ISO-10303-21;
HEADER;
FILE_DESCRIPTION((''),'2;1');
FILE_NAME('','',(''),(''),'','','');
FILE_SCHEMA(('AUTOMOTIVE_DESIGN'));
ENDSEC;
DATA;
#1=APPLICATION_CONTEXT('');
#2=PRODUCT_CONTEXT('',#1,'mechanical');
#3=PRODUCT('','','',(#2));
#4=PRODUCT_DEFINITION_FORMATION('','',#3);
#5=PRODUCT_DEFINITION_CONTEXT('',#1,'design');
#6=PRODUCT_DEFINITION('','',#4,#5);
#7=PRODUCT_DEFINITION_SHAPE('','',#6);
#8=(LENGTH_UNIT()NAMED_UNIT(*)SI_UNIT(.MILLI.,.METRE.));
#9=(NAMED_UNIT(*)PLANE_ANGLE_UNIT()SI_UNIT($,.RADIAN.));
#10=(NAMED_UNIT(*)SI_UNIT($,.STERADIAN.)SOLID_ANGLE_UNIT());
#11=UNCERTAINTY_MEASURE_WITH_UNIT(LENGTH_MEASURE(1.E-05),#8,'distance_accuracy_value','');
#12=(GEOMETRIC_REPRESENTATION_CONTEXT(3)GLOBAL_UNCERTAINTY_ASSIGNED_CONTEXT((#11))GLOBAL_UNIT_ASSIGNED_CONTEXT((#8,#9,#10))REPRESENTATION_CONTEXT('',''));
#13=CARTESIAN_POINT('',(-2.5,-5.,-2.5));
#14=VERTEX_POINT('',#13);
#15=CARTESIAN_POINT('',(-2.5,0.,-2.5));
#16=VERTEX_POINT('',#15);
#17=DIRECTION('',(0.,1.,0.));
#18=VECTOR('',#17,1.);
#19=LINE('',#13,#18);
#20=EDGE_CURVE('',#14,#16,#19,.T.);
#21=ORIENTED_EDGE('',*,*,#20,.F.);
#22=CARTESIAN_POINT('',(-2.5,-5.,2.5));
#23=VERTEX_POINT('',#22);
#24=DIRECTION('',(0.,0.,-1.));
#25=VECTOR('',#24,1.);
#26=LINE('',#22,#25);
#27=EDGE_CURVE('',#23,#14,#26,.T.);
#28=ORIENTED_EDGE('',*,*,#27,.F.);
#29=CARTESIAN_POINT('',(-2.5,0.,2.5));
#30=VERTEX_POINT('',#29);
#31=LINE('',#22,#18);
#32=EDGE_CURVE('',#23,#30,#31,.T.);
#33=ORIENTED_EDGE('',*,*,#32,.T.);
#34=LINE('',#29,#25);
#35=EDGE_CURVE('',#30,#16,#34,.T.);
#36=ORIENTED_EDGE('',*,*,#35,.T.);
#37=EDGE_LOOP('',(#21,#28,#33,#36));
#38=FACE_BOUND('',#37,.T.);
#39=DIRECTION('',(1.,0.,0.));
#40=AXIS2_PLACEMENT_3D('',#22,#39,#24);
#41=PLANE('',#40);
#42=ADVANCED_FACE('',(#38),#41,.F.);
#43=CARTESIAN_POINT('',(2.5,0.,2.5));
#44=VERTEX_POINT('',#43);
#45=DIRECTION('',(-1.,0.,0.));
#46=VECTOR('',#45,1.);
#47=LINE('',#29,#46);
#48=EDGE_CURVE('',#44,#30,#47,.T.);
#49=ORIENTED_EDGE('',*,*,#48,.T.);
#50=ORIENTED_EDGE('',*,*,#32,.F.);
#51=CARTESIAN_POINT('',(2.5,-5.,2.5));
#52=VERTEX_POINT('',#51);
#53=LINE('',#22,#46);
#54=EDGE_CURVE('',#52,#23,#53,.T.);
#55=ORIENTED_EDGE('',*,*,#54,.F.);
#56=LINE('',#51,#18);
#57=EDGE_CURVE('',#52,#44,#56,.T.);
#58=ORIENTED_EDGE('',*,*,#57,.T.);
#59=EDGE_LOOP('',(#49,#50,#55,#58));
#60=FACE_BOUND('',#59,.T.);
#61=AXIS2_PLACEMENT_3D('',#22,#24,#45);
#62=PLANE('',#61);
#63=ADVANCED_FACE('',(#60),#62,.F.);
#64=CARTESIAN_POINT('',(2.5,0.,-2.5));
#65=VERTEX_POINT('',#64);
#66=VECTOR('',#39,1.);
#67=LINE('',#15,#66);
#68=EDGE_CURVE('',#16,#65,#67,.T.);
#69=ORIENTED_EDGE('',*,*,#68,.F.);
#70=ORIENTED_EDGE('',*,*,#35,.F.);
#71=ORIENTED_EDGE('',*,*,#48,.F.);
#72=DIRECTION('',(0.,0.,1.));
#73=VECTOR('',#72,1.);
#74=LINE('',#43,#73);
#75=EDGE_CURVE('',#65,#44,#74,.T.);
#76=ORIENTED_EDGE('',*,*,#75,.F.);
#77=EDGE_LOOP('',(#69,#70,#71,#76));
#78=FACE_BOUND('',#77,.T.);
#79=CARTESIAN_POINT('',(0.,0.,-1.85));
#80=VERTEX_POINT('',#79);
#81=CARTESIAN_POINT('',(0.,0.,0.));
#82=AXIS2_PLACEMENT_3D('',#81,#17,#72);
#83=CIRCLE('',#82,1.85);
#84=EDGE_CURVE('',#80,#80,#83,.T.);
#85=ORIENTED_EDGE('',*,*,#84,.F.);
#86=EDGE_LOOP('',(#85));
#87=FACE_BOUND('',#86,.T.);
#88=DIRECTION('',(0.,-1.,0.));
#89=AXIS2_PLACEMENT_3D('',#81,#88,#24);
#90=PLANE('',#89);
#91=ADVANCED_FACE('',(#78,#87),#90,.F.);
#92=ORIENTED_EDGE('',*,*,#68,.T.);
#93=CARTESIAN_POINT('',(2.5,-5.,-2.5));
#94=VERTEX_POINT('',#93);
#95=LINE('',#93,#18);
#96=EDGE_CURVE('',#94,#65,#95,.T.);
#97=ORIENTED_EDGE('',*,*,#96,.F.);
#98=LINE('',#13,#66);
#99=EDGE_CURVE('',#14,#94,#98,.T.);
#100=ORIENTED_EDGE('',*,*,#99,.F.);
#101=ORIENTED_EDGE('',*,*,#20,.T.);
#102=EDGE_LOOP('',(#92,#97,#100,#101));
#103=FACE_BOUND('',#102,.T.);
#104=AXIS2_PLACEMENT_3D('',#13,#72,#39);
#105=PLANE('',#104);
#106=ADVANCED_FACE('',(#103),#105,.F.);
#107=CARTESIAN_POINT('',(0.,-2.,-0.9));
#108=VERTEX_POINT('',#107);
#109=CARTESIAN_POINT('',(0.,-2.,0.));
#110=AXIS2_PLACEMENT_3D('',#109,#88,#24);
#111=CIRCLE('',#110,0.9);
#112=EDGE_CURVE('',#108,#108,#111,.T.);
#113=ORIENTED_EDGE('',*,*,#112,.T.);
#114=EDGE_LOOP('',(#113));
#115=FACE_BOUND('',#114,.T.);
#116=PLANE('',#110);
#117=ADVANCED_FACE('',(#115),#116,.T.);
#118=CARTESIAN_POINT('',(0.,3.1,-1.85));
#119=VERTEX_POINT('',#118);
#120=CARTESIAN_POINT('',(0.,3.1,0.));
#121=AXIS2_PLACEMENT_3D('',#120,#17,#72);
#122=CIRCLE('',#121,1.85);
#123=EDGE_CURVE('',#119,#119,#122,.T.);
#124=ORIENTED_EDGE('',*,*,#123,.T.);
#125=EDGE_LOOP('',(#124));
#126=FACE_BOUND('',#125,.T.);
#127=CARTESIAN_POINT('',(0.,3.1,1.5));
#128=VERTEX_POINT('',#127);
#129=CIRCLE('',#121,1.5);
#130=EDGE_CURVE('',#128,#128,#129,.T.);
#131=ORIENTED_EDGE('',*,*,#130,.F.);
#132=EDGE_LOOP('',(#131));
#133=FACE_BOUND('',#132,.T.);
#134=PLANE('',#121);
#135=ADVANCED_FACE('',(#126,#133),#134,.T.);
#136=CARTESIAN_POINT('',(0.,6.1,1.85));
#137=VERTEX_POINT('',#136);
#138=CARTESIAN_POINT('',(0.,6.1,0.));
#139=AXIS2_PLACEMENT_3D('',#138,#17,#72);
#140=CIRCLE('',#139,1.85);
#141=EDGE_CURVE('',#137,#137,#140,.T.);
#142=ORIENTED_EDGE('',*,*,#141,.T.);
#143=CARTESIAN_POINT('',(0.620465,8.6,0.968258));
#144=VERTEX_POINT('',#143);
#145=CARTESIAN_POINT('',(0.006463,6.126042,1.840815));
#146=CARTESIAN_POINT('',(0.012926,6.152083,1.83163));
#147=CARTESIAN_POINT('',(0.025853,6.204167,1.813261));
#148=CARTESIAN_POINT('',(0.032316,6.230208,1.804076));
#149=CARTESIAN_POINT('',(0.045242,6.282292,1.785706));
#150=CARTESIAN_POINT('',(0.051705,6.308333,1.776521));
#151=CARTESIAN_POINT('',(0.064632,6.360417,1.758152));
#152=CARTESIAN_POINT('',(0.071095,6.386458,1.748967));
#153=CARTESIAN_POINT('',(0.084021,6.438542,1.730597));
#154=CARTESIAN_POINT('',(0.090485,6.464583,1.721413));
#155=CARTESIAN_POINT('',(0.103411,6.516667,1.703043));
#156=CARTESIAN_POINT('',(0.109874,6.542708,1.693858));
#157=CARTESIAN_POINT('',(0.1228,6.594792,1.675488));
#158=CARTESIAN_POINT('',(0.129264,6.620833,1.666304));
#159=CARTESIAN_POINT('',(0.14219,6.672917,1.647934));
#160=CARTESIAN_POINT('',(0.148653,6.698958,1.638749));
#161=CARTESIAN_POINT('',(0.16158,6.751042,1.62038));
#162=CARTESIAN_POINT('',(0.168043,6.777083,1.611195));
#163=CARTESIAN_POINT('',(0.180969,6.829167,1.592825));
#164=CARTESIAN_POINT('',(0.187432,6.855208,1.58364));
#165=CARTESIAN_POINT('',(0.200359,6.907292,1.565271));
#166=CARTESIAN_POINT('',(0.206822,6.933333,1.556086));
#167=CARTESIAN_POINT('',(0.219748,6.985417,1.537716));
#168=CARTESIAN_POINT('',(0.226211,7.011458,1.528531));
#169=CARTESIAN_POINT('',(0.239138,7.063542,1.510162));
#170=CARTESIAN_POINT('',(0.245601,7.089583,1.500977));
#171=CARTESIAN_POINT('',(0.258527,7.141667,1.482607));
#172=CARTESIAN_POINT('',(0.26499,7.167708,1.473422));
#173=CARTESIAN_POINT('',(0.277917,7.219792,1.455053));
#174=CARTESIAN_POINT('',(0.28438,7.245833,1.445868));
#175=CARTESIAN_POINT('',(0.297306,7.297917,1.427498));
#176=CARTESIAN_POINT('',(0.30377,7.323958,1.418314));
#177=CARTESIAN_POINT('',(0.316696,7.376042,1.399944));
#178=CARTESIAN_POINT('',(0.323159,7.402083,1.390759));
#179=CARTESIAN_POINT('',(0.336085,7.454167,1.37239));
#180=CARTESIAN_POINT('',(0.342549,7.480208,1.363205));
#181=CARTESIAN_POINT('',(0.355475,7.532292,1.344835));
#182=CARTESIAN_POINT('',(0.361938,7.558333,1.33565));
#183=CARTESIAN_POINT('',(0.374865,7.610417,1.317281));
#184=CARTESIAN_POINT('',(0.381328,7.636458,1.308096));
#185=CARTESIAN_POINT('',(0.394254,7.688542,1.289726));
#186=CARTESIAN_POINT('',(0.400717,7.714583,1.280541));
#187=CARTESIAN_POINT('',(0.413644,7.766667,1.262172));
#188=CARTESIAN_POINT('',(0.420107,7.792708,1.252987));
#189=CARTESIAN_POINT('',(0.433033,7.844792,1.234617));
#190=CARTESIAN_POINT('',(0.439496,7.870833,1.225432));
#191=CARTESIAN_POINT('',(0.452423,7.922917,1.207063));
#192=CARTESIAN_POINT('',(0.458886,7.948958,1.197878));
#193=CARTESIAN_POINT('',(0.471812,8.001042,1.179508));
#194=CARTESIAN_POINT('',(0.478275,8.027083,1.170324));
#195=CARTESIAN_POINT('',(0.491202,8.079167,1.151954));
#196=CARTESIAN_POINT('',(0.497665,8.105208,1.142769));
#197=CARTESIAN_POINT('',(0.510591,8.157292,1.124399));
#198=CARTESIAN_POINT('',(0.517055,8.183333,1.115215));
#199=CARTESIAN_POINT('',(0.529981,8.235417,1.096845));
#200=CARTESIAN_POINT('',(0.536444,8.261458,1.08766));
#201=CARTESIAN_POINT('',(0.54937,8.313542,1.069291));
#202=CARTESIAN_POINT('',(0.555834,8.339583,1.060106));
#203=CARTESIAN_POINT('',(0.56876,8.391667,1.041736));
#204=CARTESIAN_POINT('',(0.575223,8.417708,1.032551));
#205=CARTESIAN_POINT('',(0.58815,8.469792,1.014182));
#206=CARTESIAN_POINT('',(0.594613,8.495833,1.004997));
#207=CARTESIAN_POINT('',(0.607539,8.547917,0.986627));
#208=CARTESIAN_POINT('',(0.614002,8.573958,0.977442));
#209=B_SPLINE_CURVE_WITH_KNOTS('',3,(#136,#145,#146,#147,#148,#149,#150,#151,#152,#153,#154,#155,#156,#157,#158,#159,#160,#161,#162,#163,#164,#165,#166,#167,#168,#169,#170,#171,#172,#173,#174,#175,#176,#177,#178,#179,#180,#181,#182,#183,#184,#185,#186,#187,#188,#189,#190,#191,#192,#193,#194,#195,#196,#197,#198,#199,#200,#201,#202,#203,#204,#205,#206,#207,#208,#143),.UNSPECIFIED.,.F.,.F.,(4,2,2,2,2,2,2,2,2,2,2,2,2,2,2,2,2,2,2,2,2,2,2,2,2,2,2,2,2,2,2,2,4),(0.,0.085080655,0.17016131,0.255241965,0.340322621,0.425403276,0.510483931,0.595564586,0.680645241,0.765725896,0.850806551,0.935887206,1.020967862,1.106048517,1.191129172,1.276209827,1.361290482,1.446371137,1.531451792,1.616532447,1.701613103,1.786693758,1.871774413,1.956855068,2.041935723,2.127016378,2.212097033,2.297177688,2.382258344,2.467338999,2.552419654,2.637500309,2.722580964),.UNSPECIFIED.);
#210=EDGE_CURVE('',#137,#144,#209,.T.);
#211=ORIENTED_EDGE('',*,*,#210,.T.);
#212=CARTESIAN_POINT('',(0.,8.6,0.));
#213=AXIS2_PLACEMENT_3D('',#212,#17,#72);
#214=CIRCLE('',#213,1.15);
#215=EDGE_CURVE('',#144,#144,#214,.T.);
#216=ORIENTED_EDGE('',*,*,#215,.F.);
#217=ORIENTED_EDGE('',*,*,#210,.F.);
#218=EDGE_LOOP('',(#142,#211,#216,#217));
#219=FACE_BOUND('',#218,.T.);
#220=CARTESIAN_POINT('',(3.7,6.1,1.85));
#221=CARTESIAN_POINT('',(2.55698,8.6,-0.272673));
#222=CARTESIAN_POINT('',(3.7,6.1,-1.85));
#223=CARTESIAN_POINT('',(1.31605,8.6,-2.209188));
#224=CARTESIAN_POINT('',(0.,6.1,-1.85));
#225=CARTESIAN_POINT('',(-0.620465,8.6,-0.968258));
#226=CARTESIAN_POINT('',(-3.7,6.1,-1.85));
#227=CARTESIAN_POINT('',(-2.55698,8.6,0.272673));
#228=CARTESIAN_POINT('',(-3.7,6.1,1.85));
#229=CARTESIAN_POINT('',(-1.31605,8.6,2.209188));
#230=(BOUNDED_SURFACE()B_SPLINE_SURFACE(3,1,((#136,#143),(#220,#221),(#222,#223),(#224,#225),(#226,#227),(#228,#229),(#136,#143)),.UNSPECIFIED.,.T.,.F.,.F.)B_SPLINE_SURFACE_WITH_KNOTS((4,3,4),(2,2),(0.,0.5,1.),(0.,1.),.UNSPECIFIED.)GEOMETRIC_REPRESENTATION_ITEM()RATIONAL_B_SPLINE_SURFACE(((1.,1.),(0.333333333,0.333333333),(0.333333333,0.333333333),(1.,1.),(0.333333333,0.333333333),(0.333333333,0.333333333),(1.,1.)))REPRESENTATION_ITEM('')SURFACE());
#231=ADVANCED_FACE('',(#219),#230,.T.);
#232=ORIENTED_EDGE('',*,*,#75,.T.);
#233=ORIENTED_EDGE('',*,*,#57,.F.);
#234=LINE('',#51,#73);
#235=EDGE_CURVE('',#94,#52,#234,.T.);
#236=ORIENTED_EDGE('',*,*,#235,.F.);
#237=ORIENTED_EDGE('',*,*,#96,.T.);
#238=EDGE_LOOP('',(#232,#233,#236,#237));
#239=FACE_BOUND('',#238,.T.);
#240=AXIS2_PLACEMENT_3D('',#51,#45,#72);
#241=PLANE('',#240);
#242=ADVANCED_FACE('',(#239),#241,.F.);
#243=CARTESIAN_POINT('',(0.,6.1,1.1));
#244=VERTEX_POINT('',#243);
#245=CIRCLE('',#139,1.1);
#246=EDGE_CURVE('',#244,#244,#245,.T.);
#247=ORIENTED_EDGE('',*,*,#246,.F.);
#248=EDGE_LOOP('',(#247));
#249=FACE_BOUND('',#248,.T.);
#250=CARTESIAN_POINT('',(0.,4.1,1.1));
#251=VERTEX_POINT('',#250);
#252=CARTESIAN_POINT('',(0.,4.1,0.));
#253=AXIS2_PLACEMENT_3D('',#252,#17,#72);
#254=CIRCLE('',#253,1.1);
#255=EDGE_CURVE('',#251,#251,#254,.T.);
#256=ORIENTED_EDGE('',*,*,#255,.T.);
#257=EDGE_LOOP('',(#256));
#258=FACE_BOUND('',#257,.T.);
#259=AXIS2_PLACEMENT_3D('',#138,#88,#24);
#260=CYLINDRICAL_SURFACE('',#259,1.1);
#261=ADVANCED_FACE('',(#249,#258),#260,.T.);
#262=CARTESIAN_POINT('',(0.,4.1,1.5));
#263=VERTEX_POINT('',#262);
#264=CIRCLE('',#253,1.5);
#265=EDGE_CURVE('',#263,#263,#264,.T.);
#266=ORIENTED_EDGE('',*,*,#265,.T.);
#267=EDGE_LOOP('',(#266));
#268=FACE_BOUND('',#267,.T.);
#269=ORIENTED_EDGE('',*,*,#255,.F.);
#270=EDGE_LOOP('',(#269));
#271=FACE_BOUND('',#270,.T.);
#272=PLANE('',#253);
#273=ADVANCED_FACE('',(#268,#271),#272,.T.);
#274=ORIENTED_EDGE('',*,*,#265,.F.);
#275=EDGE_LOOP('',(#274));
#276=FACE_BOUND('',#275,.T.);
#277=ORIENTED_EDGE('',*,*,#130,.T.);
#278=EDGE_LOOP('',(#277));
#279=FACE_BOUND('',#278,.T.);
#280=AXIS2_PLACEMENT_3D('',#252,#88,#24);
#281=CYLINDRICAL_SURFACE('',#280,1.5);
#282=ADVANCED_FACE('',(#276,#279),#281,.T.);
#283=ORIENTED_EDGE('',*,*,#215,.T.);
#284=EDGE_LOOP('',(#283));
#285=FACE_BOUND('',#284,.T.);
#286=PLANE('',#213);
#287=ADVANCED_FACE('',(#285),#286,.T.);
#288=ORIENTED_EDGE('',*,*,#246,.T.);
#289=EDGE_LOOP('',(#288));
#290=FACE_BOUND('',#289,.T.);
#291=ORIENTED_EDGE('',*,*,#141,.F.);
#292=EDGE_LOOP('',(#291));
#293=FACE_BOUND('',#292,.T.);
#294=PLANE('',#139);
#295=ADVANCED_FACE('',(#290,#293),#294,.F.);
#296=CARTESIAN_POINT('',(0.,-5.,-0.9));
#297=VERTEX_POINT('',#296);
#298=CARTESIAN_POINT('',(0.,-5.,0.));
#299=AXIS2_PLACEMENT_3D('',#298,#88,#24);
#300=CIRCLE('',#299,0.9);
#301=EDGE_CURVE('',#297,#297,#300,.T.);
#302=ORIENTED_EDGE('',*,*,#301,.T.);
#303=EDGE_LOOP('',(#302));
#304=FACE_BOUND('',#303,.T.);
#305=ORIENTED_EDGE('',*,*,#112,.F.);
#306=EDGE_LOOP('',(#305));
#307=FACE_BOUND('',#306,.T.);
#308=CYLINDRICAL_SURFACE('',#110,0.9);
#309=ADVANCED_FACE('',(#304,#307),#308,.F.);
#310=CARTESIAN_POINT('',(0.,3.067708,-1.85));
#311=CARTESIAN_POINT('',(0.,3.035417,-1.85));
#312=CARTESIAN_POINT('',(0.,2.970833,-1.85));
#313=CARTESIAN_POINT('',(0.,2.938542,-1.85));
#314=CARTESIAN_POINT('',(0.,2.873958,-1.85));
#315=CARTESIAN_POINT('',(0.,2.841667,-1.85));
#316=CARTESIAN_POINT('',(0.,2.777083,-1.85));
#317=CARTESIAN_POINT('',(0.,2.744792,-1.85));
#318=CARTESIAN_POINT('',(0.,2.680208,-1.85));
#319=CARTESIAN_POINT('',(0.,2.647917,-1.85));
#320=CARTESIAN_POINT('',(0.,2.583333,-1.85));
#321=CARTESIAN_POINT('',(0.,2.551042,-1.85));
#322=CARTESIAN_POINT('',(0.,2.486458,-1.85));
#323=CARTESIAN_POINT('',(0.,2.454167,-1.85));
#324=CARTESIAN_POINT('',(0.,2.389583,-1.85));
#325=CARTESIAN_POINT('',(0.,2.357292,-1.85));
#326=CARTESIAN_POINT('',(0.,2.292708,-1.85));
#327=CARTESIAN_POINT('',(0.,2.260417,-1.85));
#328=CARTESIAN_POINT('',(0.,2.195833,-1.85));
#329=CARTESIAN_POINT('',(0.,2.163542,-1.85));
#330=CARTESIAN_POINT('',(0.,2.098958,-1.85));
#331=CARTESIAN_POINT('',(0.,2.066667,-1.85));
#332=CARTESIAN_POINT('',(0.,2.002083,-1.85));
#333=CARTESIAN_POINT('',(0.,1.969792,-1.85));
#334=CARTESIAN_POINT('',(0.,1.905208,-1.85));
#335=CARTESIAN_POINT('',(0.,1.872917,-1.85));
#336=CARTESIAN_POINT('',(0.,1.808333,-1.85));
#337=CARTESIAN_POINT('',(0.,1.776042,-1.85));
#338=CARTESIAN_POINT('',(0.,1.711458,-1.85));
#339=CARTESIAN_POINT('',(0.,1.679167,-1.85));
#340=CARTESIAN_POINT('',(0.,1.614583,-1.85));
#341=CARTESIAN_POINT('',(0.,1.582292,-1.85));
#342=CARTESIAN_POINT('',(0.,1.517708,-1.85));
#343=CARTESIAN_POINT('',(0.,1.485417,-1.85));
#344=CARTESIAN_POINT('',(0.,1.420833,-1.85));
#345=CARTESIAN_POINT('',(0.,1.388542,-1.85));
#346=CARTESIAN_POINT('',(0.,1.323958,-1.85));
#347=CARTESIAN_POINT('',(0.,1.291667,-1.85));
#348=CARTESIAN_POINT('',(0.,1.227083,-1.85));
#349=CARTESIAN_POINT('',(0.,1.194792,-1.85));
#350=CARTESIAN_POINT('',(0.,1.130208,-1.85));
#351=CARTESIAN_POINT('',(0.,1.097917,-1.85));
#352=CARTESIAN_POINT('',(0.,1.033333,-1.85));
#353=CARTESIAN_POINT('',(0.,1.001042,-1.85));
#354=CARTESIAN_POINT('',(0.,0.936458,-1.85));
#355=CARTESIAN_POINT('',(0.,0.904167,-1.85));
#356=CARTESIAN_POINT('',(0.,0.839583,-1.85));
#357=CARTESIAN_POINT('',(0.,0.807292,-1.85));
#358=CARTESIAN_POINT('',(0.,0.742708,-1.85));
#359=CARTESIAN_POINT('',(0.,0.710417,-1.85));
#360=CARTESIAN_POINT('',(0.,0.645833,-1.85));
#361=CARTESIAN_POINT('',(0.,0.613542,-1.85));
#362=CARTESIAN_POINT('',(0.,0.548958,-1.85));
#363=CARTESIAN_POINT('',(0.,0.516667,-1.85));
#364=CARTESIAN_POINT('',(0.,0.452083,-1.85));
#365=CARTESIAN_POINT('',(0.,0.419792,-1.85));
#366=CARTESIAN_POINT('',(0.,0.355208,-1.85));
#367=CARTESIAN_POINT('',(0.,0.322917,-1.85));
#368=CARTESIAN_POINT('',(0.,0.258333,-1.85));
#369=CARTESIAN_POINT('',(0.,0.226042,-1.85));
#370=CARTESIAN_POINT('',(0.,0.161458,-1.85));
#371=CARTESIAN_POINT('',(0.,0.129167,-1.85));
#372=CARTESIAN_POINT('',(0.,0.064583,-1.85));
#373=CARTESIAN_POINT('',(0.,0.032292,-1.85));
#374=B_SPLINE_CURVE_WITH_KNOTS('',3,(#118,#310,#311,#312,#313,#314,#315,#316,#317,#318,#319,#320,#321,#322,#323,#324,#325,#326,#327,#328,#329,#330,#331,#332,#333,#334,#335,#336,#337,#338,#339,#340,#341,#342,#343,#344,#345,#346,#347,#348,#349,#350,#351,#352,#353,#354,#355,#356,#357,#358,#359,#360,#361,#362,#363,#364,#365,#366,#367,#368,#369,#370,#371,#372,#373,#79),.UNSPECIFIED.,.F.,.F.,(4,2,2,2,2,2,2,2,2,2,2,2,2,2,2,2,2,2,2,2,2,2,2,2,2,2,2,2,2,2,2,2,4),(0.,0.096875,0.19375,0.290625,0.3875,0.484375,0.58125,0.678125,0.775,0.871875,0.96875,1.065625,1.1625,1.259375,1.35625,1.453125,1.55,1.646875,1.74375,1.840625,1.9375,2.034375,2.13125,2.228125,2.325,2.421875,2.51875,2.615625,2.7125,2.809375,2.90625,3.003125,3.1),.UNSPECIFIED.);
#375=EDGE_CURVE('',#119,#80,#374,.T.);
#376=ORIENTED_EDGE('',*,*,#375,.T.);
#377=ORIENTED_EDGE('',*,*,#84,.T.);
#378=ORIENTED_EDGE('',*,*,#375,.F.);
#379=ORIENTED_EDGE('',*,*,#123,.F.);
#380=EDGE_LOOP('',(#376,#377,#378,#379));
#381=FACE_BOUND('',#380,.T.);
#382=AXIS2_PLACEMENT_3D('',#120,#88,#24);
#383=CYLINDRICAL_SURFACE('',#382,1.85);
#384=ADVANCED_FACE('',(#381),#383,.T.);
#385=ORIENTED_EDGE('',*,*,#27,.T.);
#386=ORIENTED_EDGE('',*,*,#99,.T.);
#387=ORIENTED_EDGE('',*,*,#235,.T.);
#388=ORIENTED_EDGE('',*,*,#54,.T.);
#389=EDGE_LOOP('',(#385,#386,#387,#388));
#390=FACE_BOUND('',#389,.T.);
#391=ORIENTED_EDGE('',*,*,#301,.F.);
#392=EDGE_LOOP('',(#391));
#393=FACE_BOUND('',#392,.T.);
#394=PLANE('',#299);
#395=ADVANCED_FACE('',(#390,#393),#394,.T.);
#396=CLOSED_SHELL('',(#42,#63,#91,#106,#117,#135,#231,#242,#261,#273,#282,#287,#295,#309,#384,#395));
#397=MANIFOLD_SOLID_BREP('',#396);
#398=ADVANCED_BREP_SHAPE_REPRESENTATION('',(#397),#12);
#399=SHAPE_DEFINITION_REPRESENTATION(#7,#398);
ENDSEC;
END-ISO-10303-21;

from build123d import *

# Parameters (mm, degrees)
SKETCH1_R           = 1.85
BOSS_EXTRUDE1_DEPTH = 3.1
SKETCH2_R           = 1.5
BOSS_EXTRUDE2_DEPTH = 1
SKETCH3_R           = 1.1
BOSS_EXTRUDE3_DEPTH = 2
SKETCH6_W           = 5
SKETCH6_H           = 5
BOSS_EXTRUDE4_DEPTH = 5
SKETCH7_R           = 0.9
CUT_EXTRUDE1_DEPTH  = 3


with BuildPart() as part:
    # Sketch1 → Boss-Extrude1 (new body)
    with BuildSketch(Plane(origin=(0, 0, 0), x_dir=(1, 0, 0), z_dir=(0, 1, 0))):
        with Locations(Location((0, 0, 0), (0, 0, 90))):
            Circle(SKETCH1_R)
    extrude(amount=BOSS_EXTRUDE1_DEPTH)

    # Sketch2 → Boss-Extrude2 (add)
    with BuildSketch(Plane(origin=(0, 3.1, 0), x_dir=(1, 0, 0), z_dir=(0, 1, 0))):
        with Locations(Location((0, 0, 0), (0, 0, 270))):
            Circle(SKETCH2_R)
    extrude(amount=BOSS_EXTRUDE2_DEPTH)

    # Sketch3 → Boss-Extrude3 (add)
    with BuildSketch(Plane(origin=(0, 4.1, 0), x_dir=(1, 0, 0), z_dir=(0, 1, 0))):
        with Locations(Location((0, 0, 0), (0, 0, 270))):
            Circle(SKETCH3_R)
    extrude(amount=BOSS_EXTRUDE3_DEPTH)

    # Loft1: read off the stored shape, not the designer's step
    # Loft1: loft between two sections, ruled curve by curve
    loft1_from = [
        Edge.make_bspline([(0, 6.1, 1.85), (3.7, 6.1, 1.85), (3.7, 6.1, -1.85), (0, 6.1, -1.85), (-3.7, 6.1, -1.85), (-3.7, 6.1, 1.85), (0, 6.1, 1.85)], [0, 0, 0, 0, 0.5, 0.5, 0.5, 1, 1, 1, 1], 3, [1, 0.333333333, 0.333333333, 1, 0.333333333, 0.333333333, 1]),
    ]
    loft1_to = [
        Edge.make_bspline([(0.620465421, 8.6, 0.968257539), (2.556980499, 8.6, -0.272673303), (1.316049657, 8.6, -2.209188381), (-0.620465421, 8.6, -0.968257539), (-2.556980499, 8.6, 0.272673303), (-1.316049657, 8.6, 2.209188381), (0.620465421, 8.6, 0.968257539)], [0, 0, 0, 0, 0.5, 0.5, 0.5, 1, 1, 1, 1], 3, [1, 0.333333333, 0.333333333, 1, 0.333333333, 0.333333333, 1]),
    ]
    loft1 = Solid(Shell([*[Face.make_surface_from_curves(loft1_from[k], loft1_to[k]) for k in range(1)], Face(Wire(loft1_from)), Face(Wire(loft1_to))]))
    add(loft1)

    # Sketch6 → Boss-Extrude4 (add)
    with BuildSketch(Plane.XZ):
        Rectangle(SKETCH6_W, SKETCH6_H)
    extrude(amount=BOSS_EXTRUDE4_DEPTH)

    # Sketch7 → Cut-Extrude1 (cut)
    with BuildSketch(Plane.XZ.offset(5)):
        with Locations(Location((0, 0, 0), (0, 0, 270))):
            Circle(SKETCH7_R)
    extrude(amount=-CUT_EXTRUDE1_DEPTH, mode=Mode.SUBTRACT)


solid = part.part
